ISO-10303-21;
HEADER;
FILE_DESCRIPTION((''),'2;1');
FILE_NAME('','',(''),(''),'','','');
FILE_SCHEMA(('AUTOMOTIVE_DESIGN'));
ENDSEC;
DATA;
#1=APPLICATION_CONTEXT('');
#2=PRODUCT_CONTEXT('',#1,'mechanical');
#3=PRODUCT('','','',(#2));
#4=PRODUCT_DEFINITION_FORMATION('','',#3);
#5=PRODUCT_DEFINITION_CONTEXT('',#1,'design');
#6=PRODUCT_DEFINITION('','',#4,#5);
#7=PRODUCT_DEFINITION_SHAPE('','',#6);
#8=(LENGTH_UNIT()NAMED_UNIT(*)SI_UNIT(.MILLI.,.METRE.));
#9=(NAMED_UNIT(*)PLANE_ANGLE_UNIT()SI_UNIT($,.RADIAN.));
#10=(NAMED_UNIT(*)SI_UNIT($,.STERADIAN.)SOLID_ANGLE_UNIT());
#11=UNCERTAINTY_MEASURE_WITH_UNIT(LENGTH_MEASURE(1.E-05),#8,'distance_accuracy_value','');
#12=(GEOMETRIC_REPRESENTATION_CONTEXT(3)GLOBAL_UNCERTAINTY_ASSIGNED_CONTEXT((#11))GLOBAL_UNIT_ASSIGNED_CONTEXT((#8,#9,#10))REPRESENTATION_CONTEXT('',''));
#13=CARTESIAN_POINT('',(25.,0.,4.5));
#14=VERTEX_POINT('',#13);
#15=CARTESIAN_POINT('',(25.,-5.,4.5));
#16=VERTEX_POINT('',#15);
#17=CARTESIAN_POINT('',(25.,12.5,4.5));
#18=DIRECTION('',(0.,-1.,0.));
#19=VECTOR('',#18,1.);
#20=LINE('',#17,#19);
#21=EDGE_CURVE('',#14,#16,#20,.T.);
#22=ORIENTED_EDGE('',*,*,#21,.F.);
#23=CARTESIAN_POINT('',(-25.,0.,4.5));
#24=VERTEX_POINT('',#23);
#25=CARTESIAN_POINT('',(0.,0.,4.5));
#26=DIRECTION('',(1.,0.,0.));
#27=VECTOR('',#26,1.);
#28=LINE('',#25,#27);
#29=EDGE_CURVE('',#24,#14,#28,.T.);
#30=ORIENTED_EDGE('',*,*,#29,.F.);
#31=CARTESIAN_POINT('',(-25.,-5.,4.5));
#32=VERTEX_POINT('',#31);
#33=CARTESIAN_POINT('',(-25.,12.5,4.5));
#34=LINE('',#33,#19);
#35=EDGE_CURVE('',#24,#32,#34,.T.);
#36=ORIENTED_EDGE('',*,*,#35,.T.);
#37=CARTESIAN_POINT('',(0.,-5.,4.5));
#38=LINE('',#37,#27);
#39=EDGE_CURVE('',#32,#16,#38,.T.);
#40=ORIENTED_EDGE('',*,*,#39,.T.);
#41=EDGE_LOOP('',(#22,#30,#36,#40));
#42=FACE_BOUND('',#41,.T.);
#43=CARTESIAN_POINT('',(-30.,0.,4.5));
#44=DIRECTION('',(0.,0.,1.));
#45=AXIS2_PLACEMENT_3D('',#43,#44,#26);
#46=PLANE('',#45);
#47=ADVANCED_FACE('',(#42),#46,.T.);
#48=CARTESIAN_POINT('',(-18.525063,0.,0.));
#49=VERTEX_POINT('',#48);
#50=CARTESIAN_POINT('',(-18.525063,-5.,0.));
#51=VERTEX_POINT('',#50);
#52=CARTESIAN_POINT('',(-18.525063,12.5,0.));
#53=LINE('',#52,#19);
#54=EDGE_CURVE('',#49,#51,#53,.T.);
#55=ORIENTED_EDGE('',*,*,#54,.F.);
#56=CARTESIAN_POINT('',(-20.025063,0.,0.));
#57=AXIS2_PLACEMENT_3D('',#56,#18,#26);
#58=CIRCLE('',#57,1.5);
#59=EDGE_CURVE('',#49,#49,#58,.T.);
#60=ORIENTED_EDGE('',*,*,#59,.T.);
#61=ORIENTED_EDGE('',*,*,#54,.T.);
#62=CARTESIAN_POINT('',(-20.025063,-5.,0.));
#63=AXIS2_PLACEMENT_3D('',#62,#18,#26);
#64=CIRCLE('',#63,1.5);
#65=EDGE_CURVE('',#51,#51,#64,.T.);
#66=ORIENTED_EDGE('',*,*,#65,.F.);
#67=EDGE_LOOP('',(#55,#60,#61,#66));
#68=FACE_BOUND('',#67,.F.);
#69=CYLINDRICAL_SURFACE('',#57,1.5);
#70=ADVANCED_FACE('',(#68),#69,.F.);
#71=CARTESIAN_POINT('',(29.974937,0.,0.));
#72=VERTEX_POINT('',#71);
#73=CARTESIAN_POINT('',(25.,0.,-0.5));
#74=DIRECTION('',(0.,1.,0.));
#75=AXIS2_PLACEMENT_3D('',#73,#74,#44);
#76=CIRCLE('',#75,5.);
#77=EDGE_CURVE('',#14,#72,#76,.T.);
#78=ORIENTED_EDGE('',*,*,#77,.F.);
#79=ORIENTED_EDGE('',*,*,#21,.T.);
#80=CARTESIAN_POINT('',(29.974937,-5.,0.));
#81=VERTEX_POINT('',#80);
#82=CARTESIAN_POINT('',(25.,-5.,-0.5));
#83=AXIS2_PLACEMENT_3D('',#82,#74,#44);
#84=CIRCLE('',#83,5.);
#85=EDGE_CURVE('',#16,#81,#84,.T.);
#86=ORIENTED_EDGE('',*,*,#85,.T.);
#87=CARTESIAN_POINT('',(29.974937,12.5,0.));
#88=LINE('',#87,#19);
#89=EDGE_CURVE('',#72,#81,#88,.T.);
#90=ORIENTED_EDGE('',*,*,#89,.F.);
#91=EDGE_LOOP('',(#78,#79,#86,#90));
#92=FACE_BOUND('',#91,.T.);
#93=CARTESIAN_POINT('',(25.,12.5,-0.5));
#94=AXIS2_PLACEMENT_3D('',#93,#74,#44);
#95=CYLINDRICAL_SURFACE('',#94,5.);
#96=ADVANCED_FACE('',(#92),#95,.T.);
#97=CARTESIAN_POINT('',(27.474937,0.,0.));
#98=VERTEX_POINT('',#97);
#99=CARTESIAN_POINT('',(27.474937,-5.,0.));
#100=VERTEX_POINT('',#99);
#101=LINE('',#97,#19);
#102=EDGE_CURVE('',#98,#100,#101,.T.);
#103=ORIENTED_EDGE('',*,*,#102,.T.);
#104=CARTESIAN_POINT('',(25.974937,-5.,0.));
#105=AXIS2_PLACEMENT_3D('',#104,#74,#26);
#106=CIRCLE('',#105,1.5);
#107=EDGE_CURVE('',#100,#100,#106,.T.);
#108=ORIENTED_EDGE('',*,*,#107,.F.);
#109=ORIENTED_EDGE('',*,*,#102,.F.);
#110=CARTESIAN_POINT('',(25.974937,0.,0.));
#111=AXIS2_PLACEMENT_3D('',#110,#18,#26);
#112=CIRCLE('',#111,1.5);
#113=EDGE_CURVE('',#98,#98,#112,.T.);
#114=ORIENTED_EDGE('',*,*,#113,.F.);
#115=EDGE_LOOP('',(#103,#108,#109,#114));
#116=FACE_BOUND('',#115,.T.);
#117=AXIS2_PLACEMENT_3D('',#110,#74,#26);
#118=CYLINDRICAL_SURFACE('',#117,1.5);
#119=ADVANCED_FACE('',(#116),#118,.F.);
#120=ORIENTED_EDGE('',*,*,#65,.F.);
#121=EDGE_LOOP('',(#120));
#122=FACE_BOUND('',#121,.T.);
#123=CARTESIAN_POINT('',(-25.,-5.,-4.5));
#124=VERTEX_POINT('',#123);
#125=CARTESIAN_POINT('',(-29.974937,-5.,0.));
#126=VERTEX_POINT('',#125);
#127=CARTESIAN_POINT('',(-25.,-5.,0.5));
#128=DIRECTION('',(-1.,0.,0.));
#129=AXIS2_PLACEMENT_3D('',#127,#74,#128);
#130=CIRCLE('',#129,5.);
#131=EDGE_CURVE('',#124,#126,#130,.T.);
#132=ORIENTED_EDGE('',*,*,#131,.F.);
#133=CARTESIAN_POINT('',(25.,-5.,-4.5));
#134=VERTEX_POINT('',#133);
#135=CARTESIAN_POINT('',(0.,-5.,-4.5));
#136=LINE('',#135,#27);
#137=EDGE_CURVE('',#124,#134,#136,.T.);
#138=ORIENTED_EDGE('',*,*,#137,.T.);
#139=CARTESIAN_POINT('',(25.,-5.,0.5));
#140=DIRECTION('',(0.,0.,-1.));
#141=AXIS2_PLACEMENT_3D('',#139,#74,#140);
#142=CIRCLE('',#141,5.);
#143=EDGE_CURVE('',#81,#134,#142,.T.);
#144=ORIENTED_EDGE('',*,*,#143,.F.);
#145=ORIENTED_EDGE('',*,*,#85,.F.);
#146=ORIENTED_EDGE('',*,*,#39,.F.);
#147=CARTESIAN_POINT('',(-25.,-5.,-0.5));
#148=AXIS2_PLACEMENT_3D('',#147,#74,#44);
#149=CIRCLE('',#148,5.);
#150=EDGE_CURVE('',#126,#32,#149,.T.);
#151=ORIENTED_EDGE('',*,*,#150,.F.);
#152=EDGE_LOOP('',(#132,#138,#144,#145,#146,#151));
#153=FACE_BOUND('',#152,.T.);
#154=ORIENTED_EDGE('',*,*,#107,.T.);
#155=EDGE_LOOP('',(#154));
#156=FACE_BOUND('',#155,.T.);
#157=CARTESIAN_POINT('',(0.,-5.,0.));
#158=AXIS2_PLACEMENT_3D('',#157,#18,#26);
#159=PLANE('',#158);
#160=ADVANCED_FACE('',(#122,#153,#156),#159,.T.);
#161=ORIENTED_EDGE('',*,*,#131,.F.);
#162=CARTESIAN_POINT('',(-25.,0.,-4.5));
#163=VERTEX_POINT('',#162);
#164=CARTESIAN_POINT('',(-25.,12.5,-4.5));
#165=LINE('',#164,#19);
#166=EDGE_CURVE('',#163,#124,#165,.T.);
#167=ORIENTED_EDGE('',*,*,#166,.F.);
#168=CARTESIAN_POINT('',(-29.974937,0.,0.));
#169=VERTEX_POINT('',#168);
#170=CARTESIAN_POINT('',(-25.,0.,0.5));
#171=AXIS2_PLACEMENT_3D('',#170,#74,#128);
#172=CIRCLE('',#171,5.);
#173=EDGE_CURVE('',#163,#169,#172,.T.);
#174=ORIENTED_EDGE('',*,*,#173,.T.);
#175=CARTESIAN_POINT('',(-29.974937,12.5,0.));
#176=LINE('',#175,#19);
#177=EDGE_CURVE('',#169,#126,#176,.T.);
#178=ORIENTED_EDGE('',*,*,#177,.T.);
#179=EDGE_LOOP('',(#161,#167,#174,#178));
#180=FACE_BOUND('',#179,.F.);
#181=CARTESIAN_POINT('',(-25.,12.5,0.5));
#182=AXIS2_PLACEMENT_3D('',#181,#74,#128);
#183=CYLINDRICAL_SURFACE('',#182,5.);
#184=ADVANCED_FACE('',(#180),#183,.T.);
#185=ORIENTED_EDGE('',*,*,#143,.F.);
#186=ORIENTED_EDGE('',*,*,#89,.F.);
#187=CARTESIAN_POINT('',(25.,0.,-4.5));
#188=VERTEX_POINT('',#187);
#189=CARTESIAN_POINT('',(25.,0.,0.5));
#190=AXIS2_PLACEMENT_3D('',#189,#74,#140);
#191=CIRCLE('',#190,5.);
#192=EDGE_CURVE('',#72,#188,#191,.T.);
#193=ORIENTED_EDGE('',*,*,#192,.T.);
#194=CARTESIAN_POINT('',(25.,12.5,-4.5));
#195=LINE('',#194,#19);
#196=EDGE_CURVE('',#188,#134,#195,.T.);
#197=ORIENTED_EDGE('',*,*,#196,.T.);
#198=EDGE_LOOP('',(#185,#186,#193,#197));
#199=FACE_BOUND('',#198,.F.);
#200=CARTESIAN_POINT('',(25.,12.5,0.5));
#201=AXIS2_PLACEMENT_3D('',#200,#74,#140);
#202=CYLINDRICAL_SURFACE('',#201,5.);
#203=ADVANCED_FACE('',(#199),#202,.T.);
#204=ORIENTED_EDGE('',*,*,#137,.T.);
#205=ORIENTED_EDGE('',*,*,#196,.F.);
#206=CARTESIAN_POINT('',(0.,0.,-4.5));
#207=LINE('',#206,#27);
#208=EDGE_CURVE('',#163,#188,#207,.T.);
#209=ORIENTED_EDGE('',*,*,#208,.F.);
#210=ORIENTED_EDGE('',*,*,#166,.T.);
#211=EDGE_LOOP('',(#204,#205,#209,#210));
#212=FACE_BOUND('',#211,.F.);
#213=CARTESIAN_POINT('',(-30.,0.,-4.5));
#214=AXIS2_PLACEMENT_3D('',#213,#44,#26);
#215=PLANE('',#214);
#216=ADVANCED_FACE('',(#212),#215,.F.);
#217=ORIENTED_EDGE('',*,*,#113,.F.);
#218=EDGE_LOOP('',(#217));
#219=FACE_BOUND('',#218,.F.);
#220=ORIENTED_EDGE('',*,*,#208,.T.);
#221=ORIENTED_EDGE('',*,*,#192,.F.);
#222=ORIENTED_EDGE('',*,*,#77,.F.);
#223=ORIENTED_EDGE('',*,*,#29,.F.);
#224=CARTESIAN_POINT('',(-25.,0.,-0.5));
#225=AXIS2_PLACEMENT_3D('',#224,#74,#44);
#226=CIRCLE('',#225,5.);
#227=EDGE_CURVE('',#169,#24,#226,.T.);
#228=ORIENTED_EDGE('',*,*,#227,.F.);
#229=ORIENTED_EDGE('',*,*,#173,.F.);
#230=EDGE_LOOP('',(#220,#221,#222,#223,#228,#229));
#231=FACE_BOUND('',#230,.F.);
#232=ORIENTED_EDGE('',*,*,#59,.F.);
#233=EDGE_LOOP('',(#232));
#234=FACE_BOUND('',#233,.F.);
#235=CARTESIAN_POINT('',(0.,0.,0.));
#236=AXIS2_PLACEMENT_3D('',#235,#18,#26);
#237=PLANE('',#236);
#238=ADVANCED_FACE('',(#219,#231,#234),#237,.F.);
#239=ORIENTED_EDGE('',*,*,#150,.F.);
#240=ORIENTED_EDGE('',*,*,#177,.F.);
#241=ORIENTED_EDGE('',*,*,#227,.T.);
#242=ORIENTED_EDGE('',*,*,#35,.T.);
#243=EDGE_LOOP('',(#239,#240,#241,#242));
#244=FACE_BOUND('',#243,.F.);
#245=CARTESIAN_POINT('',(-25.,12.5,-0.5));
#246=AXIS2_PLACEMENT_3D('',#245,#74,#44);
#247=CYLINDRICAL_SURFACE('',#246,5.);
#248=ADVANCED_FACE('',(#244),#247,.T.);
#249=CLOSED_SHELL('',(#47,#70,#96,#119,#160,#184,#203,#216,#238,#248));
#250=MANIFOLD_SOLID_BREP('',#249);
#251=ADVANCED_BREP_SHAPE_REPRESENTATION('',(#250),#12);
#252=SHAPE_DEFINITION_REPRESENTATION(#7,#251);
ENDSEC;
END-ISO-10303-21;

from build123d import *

# Parameters (mm, degrees)
F0_W        = 60
F0_H        = 9
F1_DEPTH    = 5
F2_T1_DEPTH = 30
F3_R        = 1.5
F4_DEPTH    = 12.5


# Not quite as in the source:
# - a fillet or chamfer that OpenCascade refuses, or shapes differently, is made with other operations: its cross-section is extruded or revolved along the edge and cut away or added


with BuildPart() as f1:
    # F0 (on Front) → F1 (new body)
    with BuildSketch(Plane.XZ):
        Rectangle(F0_W, F0_H)
    extrude(amount=F1_DEPTH)

    # F2: fillet of radius 5 on 4 edges, made by hand

    # F2_s2 → F2_t1 (cut)
    with BuildSketch(Plane.XZ.offset(-12.5)):
        with BuildLine():
            ThreePointArc((-25, 4.5), (-28.5355339059, 3.0355339059), (-30, -0.5))
            Line((-30, -0.5), (-30, 4.5))
            Line((-30, 4.5), (-25, 4.5))
        make_face()
        with BuildLine():
            ThreePointArc((-30, 0.5), (-28.5355339059, -3.0355339059), (-25, -4.5))
            Line((-25, -4.5), (-30, -4.5))
            Line((-30, -4.5), (-30, 0.5))
        make_face()
        with BuildLine():
            ThreePointArc((25, 4.5), (28.5355339059, 3.0355339059), (30, -0.5))
            Line((30, -0.5), (30, 4.5))
            Line((30, 4.5), (25, 4.5))
        make_face()
        with BuildLine():
            ThreePointArc((25, -4.5), (28.5355339059, -3.0355339059), (30, 0.5))
            Line((30, 0.5), (30, -4.5))
            Line((30, -4.5), (25, -4.5))
        make_face()
    extrude(amount=F2_T1_DEPTH, mode=Mode.SUBTRACT)

    # F3 (on Front) → F4 (cut, symmetric)
    with BuildSketch(Plane.XZ):
        with Locations((25.9749371855, 0)):
            Circle(F3_R)
        with Locations((-20.0250628145, 0)):
            Circle(F3_R)
    extrude(amount=F4_DEPTH, both=True, mode=Mode.SUBTRACT)


solid = f1.part
